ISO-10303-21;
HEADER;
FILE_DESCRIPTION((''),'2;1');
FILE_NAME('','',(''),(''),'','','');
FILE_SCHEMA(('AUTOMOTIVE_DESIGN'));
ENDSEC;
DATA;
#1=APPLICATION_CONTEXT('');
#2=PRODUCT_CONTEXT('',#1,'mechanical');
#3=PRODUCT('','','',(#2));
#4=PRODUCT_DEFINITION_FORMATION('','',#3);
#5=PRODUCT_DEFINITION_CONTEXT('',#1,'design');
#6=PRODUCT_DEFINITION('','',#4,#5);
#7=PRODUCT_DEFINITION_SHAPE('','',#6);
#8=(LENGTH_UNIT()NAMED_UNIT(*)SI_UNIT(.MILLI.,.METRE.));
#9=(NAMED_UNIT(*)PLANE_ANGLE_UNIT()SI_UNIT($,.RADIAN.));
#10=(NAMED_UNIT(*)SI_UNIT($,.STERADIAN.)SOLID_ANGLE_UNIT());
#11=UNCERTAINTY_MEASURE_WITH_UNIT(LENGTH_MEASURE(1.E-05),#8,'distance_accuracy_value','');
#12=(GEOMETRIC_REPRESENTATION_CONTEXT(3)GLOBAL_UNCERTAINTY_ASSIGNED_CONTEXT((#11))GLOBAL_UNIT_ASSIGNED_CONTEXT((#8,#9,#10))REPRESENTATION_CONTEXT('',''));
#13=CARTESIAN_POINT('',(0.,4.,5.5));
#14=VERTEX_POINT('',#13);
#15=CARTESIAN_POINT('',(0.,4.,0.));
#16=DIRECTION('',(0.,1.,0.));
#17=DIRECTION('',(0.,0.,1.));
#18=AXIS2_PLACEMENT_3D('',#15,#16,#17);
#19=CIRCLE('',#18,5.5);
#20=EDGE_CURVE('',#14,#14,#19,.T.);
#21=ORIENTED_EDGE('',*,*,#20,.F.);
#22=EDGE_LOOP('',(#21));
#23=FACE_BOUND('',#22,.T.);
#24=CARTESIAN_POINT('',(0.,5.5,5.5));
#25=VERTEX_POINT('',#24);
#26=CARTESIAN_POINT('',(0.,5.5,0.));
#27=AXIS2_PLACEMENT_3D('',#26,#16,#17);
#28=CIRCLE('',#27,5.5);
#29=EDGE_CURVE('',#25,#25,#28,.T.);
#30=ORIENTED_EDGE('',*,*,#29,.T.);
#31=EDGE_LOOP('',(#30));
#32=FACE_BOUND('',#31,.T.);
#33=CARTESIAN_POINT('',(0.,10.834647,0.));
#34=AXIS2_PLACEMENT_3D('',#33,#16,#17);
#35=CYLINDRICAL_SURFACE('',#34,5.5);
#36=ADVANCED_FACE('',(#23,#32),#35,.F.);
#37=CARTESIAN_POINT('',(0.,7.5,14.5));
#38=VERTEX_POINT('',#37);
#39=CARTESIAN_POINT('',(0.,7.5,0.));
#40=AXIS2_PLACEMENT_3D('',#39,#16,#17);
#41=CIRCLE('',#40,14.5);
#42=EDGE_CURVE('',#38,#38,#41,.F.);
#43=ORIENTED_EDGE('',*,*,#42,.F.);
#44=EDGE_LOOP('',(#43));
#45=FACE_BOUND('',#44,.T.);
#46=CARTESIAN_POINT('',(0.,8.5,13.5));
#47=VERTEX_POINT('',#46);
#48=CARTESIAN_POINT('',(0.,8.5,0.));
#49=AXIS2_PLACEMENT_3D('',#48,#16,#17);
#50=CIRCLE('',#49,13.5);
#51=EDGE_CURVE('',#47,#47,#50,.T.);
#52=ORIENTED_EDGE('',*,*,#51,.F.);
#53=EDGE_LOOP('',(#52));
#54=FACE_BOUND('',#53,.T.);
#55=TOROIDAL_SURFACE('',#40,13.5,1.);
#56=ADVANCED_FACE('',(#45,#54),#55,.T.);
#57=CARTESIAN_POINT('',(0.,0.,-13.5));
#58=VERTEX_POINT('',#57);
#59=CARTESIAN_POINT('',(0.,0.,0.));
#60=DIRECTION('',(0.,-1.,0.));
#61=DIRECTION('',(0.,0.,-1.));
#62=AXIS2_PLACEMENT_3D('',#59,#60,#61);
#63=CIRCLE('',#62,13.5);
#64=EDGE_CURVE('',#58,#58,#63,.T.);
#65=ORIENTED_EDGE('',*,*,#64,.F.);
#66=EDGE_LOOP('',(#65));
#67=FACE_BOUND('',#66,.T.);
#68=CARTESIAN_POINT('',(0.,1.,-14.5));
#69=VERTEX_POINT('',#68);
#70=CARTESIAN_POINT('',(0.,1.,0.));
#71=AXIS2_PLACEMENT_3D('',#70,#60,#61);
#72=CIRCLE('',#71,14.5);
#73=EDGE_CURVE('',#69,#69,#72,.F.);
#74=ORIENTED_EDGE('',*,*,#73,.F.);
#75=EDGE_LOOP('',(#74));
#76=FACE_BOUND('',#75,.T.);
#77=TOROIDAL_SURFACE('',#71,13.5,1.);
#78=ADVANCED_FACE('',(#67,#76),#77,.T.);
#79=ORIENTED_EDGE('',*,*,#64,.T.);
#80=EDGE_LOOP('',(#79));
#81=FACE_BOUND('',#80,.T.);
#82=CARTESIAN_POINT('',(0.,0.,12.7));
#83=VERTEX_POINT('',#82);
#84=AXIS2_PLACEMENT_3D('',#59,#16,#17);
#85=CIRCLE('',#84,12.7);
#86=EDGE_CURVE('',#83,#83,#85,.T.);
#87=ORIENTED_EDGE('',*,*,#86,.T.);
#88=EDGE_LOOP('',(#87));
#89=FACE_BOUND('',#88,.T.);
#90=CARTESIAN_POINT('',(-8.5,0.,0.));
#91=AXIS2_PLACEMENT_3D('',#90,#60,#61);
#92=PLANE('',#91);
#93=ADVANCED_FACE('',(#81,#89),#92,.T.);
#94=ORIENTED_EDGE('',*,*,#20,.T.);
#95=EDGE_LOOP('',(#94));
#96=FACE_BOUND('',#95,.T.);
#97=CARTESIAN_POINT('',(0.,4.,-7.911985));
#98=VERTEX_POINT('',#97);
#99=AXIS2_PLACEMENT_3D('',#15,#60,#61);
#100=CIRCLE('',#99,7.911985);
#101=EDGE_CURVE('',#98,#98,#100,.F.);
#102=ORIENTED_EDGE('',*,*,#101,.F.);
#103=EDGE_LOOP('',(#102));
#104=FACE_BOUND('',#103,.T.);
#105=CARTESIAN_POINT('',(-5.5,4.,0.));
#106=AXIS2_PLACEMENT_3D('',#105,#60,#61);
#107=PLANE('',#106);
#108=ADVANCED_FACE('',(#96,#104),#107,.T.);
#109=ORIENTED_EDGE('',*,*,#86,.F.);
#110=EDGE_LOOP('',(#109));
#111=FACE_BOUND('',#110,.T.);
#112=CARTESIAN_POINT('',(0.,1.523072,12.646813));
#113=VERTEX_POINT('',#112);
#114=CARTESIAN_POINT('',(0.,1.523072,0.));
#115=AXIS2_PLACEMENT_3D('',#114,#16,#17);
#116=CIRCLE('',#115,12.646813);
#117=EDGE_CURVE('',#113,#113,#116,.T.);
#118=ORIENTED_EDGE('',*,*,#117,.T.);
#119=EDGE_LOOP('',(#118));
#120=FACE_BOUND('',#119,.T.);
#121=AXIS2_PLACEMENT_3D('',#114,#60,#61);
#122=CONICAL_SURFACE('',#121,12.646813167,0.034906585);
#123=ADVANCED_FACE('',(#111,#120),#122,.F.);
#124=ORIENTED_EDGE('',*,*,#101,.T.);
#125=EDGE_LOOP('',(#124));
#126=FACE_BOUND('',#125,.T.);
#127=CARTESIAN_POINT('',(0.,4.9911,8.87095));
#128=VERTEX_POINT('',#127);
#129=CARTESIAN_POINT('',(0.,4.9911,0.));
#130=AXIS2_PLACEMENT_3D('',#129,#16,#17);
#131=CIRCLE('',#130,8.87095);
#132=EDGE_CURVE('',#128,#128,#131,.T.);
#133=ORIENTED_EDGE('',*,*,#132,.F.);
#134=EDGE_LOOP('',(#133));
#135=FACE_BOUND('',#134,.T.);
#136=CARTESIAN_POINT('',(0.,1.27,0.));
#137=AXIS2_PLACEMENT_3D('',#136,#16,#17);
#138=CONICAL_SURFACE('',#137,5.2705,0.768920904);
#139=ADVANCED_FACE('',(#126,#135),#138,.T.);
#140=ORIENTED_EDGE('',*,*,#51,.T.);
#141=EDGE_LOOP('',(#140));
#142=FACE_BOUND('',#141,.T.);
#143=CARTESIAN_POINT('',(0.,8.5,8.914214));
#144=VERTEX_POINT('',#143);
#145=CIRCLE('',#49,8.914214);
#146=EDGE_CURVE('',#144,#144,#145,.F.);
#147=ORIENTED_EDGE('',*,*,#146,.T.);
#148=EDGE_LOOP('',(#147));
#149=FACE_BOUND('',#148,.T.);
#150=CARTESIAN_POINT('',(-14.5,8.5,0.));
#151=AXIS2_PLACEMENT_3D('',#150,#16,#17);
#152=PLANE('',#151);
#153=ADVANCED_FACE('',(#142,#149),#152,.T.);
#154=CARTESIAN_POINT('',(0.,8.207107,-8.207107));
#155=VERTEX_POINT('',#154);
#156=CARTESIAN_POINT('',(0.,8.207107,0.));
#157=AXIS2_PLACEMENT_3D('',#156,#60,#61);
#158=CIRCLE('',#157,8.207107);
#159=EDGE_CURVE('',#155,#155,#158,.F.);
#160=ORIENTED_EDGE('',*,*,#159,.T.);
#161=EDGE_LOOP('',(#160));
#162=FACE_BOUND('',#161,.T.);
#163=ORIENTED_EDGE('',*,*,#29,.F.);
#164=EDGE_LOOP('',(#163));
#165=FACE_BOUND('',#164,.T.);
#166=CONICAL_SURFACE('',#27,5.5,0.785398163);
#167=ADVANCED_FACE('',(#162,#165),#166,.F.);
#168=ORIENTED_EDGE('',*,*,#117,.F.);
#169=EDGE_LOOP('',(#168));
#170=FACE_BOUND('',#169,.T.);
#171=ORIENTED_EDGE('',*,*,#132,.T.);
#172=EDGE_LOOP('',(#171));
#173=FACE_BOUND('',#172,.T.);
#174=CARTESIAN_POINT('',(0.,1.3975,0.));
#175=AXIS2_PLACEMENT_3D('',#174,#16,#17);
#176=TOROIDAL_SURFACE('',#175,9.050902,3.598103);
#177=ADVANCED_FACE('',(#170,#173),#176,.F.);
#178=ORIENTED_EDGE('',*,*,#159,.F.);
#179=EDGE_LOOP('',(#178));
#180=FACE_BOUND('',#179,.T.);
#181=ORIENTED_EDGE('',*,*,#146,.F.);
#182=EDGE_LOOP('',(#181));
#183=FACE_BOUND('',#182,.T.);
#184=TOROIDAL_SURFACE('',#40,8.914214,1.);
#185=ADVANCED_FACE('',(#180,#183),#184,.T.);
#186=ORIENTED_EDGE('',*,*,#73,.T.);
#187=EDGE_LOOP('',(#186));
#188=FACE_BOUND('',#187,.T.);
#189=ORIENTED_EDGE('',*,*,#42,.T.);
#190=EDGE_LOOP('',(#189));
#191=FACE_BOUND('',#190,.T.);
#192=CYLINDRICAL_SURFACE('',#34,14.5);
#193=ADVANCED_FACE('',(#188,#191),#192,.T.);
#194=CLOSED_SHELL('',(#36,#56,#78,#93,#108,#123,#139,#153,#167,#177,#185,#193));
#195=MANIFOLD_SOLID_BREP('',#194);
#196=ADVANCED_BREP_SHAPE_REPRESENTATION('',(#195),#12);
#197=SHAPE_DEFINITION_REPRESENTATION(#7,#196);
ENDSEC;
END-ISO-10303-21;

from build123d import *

# Parameters (mm, degrees)
FILLET1_R = 1


# Read off the part's stored shape, not the designer's step: Dog Bowl Washer
with BuildPart() as part:
    # Dog Bowl Washer outline → Dog Bowl Washer (revolve)
    with BuildSketch(Plane.XY):
        with BuildLine():
            Line((5.2705, 1.27), (6.392427617, 0))
            Line((6.392427617, 0), (12.7, 0))
            Line((12.7, 0), (12.646813167, 1.52307162))
            ThreePointArc((12.646813167, 1.52307162), (11.484828724, 4.047470654), (8.87095, 4.9911))
            Line((8.87095, 4.9911), (5.2705, 1.27))
        make_face()
    revolve(axis=Axis((0, 0, 0), (0, 1, 0)))


with BuildPart() as body_2:
    # Sketch1 → Revolve1 (revolve)
    with BuildSketch(Plane.XY, mode=Mode.PRIVATE) as revolve1_sk:
        Polygon((-14.5, 8.5), (-8.5, 8.5), (-5.5, 5.5), (-5.5, 4), (-8.5, 4), (-8.5, 0), (-14.5, 0), align=None)
    revolve(revolve1_sk.sketch.rotate(Axis((0, 10.834647468, 0), (0, -1, 0)), 270), axis=Axis((0, 10.834647468, 0), (0, -1, 0)))

    # Combine1: cut part
    add(part.part, mode=Mode.SUBTRACT)

    # Fillet1
    fillet1_edges = [body_2.edges().sort_by_distance(p)[0] for p in [
        (0, 0, -14.5),
        (0, 8.5, -8.5),
        (0, 8.5, -14.5),
    ]]
    fillet(fillet1_edges, radius=FILLET1_R)


solid = body_2.part
